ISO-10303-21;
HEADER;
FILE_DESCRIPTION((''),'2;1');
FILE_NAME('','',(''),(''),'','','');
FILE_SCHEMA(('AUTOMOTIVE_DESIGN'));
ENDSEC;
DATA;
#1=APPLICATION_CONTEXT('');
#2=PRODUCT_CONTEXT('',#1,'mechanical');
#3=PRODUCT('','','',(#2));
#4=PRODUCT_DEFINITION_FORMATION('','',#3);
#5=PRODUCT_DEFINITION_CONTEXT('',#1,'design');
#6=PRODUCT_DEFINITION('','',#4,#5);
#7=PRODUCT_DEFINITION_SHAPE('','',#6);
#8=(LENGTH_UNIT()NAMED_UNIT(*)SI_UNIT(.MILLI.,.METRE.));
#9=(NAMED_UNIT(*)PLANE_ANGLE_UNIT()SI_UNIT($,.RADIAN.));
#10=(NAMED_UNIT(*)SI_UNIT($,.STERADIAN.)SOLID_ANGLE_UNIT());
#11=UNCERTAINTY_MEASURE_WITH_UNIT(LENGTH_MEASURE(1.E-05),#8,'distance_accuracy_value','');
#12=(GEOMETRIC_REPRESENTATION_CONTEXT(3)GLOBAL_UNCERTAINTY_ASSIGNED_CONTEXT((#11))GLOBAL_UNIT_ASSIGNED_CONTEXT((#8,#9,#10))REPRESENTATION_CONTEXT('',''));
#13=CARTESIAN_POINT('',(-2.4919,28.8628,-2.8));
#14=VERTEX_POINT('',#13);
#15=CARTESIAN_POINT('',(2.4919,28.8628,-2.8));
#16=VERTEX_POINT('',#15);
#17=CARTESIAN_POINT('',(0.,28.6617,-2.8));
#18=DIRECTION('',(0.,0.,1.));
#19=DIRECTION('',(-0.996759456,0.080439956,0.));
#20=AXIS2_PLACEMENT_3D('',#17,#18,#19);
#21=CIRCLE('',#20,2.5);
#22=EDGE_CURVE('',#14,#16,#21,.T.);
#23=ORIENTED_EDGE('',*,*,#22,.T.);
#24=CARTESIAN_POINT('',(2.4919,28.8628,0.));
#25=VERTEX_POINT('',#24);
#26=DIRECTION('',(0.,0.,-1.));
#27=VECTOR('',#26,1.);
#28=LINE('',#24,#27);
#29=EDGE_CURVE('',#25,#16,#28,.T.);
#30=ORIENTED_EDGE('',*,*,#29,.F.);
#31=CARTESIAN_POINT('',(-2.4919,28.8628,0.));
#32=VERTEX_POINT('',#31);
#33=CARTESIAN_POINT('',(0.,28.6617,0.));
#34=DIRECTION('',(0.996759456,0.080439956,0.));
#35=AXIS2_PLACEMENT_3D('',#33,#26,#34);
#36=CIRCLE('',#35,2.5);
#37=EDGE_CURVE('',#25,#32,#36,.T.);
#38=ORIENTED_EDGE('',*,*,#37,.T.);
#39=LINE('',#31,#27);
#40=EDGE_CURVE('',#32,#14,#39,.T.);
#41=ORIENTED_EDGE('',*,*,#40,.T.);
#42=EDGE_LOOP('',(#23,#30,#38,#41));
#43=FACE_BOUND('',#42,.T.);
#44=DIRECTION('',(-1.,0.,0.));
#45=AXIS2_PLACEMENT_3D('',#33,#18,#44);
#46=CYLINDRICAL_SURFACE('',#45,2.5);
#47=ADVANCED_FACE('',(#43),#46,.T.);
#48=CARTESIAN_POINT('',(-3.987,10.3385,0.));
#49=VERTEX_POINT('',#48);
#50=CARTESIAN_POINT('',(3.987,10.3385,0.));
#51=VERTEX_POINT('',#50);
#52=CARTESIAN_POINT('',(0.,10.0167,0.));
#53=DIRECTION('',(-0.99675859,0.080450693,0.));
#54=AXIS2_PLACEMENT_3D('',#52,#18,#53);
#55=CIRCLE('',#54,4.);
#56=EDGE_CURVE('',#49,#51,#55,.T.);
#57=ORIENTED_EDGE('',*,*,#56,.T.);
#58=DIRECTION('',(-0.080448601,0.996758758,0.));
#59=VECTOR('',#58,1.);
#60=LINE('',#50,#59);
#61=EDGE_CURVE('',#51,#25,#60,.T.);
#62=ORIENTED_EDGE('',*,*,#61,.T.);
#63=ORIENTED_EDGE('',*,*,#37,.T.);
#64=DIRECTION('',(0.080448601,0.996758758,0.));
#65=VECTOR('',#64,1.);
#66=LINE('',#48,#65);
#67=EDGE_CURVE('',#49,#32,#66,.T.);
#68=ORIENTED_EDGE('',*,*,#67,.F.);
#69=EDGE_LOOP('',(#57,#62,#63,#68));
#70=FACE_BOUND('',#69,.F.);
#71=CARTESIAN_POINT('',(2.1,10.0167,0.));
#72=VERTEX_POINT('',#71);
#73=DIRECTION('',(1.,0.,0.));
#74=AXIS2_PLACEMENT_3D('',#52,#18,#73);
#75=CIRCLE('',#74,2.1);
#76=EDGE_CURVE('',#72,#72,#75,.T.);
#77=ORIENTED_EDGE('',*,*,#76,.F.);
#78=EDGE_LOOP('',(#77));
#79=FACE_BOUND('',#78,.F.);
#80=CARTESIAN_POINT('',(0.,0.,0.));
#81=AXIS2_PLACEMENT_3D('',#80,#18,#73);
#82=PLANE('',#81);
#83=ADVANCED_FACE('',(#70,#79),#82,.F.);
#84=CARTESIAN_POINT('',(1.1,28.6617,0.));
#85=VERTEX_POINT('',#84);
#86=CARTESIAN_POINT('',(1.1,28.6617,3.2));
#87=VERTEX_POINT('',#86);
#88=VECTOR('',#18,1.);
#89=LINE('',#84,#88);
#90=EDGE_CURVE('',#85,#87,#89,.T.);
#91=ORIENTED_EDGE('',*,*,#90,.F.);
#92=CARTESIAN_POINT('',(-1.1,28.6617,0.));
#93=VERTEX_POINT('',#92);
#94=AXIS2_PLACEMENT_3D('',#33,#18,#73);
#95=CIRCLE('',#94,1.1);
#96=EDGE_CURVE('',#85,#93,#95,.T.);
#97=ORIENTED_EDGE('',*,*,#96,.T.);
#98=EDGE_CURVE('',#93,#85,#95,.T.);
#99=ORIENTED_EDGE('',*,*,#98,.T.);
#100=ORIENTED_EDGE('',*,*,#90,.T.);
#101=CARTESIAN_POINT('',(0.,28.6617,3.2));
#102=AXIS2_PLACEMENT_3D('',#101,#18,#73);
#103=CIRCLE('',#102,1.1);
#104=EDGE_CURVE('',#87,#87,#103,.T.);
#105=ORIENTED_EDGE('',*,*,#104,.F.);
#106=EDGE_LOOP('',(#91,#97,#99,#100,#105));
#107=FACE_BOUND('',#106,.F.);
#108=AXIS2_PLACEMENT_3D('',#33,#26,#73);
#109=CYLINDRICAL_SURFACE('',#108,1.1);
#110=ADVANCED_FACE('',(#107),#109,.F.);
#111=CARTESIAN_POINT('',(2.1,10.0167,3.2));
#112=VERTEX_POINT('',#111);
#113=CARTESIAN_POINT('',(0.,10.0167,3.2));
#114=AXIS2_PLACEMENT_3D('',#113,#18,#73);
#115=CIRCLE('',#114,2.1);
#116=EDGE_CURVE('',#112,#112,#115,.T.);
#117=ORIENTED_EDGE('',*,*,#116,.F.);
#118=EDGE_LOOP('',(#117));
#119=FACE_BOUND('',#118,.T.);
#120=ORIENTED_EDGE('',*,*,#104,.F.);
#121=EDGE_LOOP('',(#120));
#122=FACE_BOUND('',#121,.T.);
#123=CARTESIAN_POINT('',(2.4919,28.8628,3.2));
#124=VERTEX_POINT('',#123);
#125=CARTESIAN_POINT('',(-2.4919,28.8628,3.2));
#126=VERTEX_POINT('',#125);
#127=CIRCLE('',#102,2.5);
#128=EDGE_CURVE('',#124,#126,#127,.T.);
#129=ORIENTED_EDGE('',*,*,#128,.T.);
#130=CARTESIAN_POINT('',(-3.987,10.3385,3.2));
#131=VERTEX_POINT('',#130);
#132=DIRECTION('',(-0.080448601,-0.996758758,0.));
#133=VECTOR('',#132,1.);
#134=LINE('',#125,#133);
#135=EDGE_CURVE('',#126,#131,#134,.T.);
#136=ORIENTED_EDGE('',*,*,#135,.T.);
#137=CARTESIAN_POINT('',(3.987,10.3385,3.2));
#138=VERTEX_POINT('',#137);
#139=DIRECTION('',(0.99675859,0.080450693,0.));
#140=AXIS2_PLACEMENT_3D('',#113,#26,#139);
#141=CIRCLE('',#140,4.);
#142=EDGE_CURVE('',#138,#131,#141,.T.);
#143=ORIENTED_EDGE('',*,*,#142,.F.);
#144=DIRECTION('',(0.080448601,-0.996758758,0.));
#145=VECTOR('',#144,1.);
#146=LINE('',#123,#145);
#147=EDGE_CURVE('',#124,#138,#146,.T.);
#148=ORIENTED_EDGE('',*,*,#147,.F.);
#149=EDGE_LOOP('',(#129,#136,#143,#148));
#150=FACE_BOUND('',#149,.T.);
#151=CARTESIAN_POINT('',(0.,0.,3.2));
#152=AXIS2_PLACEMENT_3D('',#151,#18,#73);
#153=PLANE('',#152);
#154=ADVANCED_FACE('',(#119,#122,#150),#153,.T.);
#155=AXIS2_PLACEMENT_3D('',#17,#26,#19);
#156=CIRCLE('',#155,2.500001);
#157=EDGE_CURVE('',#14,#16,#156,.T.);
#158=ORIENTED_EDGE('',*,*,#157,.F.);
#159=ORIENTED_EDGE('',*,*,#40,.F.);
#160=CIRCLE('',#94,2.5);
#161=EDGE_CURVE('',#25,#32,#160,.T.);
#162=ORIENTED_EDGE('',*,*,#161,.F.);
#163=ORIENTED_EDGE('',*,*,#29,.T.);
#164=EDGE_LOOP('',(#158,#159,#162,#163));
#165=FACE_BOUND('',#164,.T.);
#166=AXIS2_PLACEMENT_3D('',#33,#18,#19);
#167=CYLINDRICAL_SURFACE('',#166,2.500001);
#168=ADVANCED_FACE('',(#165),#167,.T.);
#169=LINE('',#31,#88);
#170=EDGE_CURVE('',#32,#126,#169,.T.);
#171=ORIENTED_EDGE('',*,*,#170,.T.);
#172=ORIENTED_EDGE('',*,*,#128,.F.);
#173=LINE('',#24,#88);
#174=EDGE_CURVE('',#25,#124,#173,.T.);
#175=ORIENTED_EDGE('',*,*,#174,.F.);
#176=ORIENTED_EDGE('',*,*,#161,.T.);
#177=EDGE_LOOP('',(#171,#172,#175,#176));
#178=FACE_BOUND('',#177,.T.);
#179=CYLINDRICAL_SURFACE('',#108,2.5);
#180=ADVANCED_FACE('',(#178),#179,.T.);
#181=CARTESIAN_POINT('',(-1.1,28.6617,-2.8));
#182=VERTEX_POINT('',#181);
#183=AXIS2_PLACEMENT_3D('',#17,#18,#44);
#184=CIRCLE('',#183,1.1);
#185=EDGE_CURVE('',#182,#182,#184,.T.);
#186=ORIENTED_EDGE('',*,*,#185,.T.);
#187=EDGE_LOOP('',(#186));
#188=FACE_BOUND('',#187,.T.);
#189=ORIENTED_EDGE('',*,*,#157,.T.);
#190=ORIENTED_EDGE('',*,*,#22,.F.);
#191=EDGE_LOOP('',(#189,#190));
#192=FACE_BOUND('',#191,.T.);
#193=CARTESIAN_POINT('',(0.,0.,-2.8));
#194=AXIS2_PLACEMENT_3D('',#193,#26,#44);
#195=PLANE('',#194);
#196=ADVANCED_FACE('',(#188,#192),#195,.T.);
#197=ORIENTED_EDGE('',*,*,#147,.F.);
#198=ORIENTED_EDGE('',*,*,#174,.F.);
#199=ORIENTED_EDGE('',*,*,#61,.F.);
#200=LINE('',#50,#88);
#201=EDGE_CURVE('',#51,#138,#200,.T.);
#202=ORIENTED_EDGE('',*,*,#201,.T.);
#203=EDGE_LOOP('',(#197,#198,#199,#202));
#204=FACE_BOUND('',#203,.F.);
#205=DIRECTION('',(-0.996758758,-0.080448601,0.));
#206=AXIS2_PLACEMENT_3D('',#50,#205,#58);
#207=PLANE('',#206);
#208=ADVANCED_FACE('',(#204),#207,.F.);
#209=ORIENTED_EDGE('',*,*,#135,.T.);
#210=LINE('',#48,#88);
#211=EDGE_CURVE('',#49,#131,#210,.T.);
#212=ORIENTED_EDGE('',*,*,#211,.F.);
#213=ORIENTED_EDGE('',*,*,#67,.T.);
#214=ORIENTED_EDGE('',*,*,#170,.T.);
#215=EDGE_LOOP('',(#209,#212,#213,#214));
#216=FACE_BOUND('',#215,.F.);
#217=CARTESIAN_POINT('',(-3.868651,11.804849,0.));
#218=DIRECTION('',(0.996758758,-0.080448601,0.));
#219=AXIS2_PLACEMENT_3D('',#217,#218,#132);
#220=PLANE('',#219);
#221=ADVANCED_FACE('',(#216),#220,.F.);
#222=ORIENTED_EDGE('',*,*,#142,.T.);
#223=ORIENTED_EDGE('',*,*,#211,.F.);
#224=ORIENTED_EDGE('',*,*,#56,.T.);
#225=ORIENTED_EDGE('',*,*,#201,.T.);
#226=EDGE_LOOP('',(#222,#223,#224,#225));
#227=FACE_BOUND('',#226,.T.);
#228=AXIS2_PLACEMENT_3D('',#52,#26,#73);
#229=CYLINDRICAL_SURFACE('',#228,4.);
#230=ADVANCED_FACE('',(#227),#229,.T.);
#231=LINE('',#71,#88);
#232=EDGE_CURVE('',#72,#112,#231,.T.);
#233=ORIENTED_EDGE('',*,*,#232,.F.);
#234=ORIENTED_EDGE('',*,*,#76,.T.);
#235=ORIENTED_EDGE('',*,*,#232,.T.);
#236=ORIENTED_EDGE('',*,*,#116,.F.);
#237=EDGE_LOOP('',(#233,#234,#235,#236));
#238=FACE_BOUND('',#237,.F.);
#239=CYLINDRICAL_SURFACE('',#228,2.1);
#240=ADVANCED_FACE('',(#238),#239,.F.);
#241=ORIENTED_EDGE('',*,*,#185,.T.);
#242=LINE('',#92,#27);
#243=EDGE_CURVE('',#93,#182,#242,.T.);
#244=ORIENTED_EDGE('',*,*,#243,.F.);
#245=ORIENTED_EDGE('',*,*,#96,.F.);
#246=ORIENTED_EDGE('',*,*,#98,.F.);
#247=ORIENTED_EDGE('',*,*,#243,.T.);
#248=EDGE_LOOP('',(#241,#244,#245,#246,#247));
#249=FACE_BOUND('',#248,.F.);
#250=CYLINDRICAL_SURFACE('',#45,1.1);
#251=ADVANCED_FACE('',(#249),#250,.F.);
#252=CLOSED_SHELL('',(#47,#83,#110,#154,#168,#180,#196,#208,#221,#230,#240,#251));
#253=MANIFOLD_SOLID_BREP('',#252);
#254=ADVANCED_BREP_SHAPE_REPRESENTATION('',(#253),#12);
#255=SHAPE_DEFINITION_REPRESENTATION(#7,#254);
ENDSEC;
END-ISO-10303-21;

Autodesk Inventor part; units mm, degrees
ref_plane "YZ Plane" through (0, 0, 0) normal (1, 0, 0) x (0, 1, 0)
ref_plane "XZ Plane" through (0, 0, 0) normal (0, 1, 0) x (-1, 0, 0)
ref_plane "XY Plane" through (0, 0, 0) normal (0, 0, 1) x (1, 0, 0)
sketch "Эскиз1" plane through (0, 0, 0) normal (0, 0, 1) x (1, 0, 0)
  circle A0 centre (0, 10.0167) radius 1.6 projected
  line L0 (25.2327, 9.549) -> (31.7335, -1.7106) projected
  arc A1 (11.3933, 4.2802) -> (25.2327, 9.549) centre (0, 55.0167) ccw projected
  line L1 (11.3933, 4.2802) -> (2.8284, 12.8451) projected
  arc A2 (2.8284, 12.8451) -> (-2.8284, 12.8451) centre (0, 10.0167) ccw projected
  line L2 (-2.8284, 12.8451) -> (-11.3933, 4.2802) projected
  arc A3 (-25.2327, 9.549) -> (-11.3933, 4.2802) centre (0, 55.0167) ccw projected
  line L3 (-31.7335, -1.7106) -> (-25.2327, 9.549) projected
  arc A4 (-31.7335, -1.7106) -> (31.7335, -1.7106) centre (0, 55.0167) ccw projected
  arc A5 (1.9935, 28.8226) -> (-1.9935, 28.8226) centre (0, 28.6617) ccw projected
  line L4 (-1.9935, 28.8226) -> (-3.4887, 10.2982) projected
  arc A6 (-3.4887, 10.2982) -> (3.4887, 10.2982) centre (0, 10.0167) ccw projected
  line L5 (3.4887, 10.2982) -> (1.9935, 28.8226) projected
  circle A7 centre (0, 28.6617) radius 1.1 projected
  circle A8 centre (0, 10.0167) radius 0.95 projected
  circle A9 centre (0, 28.6617) radius 1.6
  circle A10 centre (0, 10.0167) radius 2.1
  circle A11 centre (0, 10.0167) radius 4
  circle A12 centre (0, 28.6617) radius 2.5
  line L6 (-2.4919, 28.8628) -> (-3.987, 10.3385)
  line L7 (3.987, 10.3385) -> (2.4919, 28.8628)
  point P0 (0, 0)
  dimension "d0" = 3.2
  dimension "d1" = 4.2
  dimension "d2" = 8
  dimension "d3" = 5
extrude "Выдавливание1" add sketch "Эскиз1" along normal blind 3.2 contours L7 A11 L5 L1 | L1 L5 A12 L7 | L5 A11 L1 | L1 A2 L2 L4 A12 L5 | A11 L4 A6 L5 | A12 L5 A5 L4 | A11 L5 A6 L4 A2 | A12 L4 A5 L5 | A12 L4 L2 L6 | L2 L4 A11 L6 | A11 L4 L2 | A9
sketch "Эскиз2" plane through (0, 0, 0) normal (0, 0, -1) x (-1, 0, 0)
  line L0 (0, 6.9767) -> (0, 71.9606) projected
  line L1 (-1.9935, 28.8226) -> (-3.4887, 10.2982) projected
  arc A0 (-3.4887, 10.2982) -> (3.4887, 10.2982) centre (0, 10.0167) ccw projected
  line L2 (3.4887, 10.2982) -> (1.9935, 28.8226) projected
  arc A1 (1.9935, 28.8226) -> (-1.9935, 28.8226) centre (0, 28.6617) ccw projected
  circle A2 centre (0, 10.0167) radius 1.925 projected
  circle A3 centre (0, 28.6617) radius 1.1 projected
  circle A4 centre (0, 28.6617) radius 1.1 projected
  circle A5 centre (0, 10.0167) radius 2.1 projected
  arc A6 (-3.987, 10.3385) -> (3.987, 10.3385) centre (0, 10.0167) ccw projected
  line L3 (2.4919, 28.8628) -> (3.987, 10.3385) projected
  arc A7 (2.4919, 28.8628) -> (-2.4919, 28.8628) centre (0, 28.6617) ccw projected
  line L4 (-3.987, 10.3385) -> (-2.4919, 28.8628) projected
  circle A8 centre (0, 28.6617) radius 2.5
  point P0 (0, 0)
  point P1 (-2.4919, 28.8628)
extrude "Выдавливание2" add sketch "Эскиз2" along normal blind 2.8 contours A8 L1 A1 L0 A3 | L0 A3 A1 L2 A8 | A8 A7 L0 A1 L1 | L2 A1 L0 A7 A8
properties part number "shatun"
